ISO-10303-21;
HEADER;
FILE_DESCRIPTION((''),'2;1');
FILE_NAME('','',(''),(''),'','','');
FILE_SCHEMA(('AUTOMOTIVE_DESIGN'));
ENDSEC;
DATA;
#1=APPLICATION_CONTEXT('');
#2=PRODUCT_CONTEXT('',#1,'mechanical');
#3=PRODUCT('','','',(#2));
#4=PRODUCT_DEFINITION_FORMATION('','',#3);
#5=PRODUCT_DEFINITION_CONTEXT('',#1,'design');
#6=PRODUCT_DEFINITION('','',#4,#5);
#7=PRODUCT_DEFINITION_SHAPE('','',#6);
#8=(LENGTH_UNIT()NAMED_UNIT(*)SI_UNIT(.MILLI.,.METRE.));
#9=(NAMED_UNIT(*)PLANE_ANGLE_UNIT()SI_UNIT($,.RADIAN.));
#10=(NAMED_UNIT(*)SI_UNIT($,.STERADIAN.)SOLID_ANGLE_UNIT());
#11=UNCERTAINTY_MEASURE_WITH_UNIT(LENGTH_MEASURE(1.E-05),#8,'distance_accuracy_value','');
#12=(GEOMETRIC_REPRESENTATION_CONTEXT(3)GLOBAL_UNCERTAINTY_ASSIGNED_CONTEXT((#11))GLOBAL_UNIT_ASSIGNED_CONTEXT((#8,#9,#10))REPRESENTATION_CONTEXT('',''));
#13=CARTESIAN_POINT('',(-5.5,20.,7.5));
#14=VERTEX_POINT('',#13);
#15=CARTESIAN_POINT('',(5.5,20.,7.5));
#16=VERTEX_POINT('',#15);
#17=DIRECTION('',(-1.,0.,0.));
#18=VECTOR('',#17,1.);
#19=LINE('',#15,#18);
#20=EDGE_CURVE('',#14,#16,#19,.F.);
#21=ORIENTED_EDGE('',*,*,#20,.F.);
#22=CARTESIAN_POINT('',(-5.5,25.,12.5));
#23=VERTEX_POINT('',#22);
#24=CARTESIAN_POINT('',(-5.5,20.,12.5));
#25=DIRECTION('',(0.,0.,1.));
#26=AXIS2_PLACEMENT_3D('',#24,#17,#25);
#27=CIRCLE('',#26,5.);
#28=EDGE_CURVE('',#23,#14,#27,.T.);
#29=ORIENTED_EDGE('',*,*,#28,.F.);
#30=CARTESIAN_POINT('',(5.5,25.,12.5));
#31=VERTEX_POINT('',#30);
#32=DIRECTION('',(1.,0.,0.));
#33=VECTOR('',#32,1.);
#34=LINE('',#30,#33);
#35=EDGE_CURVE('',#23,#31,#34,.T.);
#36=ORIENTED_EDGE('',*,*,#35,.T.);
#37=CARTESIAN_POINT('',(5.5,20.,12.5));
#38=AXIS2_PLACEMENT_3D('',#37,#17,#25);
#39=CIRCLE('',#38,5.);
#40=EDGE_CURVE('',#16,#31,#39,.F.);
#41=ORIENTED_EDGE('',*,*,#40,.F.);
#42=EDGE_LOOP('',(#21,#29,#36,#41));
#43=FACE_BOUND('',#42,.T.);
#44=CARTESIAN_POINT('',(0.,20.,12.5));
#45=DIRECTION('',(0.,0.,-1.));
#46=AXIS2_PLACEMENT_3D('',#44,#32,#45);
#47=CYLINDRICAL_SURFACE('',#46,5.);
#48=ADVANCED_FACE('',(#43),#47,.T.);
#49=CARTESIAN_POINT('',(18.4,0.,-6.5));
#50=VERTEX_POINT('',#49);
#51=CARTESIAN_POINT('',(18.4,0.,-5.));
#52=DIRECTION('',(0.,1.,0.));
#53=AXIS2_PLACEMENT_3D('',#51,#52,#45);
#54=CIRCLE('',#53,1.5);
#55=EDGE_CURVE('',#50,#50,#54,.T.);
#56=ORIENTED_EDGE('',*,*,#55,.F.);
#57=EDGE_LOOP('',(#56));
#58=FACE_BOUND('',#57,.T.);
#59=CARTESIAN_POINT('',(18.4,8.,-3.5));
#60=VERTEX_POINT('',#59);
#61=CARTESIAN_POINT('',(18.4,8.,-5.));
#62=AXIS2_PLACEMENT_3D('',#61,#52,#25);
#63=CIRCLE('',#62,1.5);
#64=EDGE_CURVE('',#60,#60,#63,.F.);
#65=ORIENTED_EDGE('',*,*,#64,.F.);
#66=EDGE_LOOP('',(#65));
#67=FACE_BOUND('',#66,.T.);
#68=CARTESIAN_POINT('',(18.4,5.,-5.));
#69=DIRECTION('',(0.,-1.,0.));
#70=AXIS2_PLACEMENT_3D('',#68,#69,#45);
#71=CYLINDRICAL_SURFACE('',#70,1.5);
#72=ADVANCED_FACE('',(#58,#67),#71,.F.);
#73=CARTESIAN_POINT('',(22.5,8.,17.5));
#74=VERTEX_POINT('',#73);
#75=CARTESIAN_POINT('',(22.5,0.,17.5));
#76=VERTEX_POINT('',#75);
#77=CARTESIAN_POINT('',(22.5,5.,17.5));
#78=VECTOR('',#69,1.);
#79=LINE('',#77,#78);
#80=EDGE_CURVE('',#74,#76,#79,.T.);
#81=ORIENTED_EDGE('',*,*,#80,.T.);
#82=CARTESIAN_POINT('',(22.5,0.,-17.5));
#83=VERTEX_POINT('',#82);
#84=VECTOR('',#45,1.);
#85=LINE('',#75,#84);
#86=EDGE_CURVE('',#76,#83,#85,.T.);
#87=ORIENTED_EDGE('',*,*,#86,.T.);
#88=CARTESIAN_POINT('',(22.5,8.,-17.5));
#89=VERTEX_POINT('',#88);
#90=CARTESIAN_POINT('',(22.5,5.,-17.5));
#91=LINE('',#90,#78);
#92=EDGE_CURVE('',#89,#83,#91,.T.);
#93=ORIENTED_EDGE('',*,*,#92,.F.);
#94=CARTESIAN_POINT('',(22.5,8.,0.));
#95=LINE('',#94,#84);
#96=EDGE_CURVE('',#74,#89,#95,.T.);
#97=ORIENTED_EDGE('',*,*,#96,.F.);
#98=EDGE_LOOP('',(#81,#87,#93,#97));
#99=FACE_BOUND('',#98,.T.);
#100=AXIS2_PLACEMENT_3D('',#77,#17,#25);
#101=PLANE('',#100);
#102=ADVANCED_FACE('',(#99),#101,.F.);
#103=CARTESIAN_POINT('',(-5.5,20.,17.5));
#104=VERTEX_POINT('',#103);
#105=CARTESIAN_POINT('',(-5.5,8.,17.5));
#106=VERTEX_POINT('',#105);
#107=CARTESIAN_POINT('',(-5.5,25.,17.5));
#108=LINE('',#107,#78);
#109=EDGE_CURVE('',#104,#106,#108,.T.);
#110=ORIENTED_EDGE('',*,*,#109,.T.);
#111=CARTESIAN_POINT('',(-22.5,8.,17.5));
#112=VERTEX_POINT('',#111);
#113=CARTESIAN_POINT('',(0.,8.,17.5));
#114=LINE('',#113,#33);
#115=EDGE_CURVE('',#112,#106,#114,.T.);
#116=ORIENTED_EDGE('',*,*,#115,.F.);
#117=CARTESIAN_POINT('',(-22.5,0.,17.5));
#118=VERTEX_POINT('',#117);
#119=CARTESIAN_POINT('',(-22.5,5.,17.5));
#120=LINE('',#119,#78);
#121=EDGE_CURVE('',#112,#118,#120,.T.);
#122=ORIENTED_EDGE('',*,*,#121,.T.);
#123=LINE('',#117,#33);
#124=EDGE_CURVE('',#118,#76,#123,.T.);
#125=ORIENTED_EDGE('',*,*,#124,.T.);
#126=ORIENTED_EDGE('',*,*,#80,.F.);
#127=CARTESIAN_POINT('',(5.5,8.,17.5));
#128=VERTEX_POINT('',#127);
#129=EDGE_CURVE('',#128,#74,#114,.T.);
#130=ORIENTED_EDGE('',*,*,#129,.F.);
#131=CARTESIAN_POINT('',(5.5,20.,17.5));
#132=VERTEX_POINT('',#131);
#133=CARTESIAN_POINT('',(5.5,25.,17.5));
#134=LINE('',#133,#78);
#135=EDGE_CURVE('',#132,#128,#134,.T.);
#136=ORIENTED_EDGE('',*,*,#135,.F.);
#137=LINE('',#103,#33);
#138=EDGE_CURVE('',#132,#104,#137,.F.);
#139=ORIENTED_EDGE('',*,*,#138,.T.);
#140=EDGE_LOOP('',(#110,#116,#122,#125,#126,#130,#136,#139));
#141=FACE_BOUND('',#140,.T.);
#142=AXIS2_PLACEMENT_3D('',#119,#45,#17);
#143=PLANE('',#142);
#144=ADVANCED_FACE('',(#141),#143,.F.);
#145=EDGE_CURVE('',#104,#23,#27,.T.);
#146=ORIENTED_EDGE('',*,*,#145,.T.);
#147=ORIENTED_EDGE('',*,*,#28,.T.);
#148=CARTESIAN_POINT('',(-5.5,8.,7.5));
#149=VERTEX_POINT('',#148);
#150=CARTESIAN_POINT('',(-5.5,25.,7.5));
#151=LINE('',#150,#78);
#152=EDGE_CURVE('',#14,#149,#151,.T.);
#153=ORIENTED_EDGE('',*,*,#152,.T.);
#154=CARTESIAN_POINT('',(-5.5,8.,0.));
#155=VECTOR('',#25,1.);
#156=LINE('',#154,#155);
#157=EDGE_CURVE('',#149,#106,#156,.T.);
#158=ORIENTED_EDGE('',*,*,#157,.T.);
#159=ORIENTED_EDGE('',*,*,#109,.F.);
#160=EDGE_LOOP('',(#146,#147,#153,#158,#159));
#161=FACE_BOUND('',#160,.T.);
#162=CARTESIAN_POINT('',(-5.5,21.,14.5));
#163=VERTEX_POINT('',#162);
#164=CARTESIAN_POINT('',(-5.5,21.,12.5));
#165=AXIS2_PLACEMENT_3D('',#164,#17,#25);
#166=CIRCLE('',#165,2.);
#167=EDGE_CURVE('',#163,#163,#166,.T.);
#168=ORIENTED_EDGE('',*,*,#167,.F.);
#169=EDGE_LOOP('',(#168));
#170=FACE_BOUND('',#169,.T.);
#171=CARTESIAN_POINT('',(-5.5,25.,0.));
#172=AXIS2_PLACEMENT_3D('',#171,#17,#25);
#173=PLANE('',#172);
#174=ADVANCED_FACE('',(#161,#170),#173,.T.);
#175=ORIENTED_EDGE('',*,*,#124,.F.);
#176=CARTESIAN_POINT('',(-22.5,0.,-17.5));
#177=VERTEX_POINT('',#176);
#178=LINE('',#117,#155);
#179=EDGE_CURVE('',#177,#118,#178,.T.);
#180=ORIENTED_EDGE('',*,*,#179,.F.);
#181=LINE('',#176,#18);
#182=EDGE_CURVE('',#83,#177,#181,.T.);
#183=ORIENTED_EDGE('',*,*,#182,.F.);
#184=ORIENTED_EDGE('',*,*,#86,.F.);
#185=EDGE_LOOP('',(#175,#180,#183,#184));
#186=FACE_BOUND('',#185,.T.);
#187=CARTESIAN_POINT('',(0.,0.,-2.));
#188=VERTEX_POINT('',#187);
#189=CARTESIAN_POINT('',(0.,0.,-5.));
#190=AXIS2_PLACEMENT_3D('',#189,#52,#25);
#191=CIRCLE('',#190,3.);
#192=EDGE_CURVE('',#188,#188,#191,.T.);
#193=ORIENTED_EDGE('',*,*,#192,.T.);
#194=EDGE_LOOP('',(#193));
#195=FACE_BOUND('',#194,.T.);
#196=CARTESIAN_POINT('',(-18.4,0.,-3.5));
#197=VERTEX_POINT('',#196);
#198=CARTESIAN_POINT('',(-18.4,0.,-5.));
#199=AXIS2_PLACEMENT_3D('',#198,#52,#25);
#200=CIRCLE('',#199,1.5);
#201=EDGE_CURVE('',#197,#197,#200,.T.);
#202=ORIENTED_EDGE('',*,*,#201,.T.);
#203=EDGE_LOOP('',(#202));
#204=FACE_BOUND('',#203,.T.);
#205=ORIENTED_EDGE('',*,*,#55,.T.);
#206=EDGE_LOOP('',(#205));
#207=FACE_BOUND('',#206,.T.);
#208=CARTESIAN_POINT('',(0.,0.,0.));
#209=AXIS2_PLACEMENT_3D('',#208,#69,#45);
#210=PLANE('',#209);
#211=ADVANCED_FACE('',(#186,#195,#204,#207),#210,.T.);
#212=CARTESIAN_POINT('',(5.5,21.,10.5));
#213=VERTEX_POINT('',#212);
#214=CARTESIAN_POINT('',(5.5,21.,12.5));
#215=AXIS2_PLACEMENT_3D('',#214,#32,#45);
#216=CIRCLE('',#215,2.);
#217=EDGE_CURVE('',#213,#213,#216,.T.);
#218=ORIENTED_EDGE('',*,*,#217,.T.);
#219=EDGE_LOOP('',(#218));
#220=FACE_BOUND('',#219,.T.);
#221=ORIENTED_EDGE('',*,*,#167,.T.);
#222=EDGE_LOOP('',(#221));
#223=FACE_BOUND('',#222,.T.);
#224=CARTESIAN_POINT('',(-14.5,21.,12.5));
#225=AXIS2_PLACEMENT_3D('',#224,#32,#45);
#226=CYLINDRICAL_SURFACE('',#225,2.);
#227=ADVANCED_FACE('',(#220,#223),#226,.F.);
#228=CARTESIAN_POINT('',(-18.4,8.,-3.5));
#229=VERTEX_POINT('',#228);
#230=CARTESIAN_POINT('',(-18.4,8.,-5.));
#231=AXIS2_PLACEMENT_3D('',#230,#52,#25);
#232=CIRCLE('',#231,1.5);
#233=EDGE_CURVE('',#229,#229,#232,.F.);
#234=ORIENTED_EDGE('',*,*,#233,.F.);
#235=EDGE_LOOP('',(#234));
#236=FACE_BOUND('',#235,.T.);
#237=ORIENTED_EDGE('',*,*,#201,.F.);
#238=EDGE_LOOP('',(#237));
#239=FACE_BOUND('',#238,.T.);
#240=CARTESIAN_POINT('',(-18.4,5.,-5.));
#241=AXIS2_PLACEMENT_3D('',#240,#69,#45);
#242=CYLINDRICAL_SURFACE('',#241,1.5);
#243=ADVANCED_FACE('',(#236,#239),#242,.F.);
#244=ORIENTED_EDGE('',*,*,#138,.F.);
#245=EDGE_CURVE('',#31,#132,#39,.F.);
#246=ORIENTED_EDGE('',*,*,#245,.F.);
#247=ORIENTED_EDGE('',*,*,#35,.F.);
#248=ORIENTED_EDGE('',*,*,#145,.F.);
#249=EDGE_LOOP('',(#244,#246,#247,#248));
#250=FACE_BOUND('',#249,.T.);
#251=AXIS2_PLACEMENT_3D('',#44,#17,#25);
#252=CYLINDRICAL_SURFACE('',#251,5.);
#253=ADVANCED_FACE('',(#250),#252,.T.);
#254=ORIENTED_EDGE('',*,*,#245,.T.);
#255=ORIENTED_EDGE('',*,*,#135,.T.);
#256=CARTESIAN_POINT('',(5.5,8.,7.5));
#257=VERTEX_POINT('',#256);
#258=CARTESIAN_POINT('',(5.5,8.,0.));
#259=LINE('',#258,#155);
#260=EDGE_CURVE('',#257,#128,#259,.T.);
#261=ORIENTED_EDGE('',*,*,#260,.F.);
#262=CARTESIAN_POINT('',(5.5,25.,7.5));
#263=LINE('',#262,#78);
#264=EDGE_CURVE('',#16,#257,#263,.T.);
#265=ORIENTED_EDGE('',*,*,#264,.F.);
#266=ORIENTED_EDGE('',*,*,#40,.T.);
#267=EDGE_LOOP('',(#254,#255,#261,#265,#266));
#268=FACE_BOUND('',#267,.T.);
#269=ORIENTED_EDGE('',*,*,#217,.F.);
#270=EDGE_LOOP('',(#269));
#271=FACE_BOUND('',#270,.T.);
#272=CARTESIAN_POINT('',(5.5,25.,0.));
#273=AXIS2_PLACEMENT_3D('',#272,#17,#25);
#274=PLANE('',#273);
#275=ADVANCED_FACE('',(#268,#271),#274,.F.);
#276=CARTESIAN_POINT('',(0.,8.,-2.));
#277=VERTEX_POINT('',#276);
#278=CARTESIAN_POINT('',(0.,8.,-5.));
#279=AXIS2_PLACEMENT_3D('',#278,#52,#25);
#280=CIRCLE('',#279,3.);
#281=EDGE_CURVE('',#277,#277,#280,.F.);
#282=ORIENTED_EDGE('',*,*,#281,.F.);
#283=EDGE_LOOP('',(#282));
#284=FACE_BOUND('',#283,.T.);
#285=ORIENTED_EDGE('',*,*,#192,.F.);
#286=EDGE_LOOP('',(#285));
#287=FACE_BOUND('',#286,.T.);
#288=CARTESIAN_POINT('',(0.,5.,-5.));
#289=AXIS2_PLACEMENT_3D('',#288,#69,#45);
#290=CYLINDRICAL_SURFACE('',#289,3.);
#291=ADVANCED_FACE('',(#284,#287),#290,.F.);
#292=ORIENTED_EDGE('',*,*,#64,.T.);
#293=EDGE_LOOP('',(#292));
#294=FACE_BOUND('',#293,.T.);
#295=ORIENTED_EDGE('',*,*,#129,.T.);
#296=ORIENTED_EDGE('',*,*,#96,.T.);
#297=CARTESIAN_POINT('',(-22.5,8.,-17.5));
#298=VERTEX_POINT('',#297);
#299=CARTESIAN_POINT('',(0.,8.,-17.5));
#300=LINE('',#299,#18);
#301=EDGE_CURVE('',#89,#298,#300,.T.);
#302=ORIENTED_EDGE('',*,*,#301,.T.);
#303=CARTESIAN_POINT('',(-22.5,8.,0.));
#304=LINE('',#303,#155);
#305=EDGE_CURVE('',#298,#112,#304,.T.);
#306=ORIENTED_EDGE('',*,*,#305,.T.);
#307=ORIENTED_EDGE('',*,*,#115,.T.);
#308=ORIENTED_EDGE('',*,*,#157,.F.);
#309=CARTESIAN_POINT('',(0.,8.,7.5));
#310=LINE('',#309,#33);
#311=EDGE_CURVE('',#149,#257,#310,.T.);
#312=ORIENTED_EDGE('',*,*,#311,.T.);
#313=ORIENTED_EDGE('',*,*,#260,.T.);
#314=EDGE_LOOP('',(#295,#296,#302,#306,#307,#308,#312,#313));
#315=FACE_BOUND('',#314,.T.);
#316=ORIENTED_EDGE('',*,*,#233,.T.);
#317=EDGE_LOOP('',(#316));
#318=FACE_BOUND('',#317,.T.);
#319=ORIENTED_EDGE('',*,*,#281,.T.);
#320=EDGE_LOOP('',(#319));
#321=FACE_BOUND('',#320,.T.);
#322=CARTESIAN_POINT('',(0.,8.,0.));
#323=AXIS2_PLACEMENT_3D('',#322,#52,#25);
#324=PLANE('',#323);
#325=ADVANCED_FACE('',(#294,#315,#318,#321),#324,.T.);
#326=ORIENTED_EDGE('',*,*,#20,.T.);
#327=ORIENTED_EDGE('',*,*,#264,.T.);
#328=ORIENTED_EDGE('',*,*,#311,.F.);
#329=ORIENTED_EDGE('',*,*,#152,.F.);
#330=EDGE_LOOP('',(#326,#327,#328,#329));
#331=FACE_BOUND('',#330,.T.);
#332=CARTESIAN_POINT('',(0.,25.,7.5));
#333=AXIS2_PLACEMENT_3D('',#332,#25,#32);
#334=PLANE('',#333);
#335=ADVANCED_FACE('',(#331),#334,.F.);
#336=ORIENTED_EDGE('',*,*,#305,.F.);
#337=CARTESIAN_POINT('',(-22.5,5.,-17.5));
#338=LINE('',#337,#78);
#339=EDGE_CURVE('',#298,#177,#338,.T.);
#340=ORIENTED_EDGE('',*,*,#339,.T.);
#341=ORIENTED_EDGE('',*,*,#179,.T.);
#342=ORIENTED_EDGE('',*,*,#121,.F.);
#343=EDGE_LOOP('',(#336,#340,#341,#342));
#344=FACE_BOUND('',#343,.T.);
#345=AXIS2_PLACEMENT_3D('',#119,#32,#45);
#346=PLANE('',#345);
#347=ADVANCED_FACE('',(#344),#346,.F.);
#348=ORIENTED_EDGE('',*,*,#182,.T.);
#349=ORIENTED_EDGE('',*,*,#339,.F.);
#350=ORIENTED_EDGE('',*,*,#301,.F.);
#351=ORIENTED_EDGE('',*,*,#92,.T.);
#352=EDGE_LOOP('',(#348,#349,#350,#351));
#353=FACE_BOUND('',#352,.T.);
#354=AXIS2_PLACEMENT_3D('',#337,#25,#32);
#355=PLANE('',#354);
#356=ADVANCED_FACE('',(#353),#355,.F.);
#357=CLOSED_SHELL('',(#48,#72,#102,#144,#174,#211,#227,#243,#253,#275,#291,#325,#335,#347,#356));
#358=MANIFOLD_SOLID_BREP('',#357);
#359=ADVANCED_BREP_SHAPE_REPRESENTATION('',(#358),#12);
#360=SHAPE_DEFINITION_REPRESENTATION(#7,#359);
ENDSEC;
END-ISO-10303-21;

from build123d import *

# Parameters (mm, degrees)
SKETCH2_W           = 45
SKETCH2_H           = 35
SKETCH2_R           = 3
SKETCH2_R_2         = 1.5
BOSS_EXTRUDE1_DEPTH = 5
SKETCH4_R           = 1.5
SKETCH4_R_2         = 3
SKETCH4_W           = 11
SKETCH4_H           = 10
BOSS_EXTRUDE2_DEPTH = 3
SKETCH4_3_W         = 11
SKETCH4_3_H         = 10
BOSS_EXTRUDE3_DEPTH = 20
SKETCH5_R           = 2
CUT_EXTRUDE1_DEPTH  = 20
FILLET1_R           = 5


with BuildPart() as part:
    # Sketch2 → Boss-Extrude1 (new body)
    with BuildSketch(Plane(origin=(0, 0, 0), x_dir=(1, 0, 0), z_dir=(0, 1, 0))):
        Rectangle(SKETCH2_W, SKETCH2_H)
        with Locations(Location((0, 5, 0), (0, 0, 270))):
            Circle(SKETCH2_R, mode=Mode.SUBTRACT)
        with Locations(Location((-18.4, 5, 0), (0, 0, 270))):
            Circle(SKETCH2_R_2, mode=Mode.SUBTRACT)
        with Locations(Location((18.4, 5, 0), (0, 0, 90))):
            Circle(SKETCH2_R_2, mode=Mode.SUBTRACT)
    extrude(amount=BOSS_EXTRUDE1_DEPTH)

    # Sketch4 → Boss-Extrude2 (add)
    # profile 1 of 3: a face of its own
    with BuildSketch(Plane(origin=(0, 5, 0), x_dir=(1, 0, 0), z_dir=(0, 1, 0))):
        Polygon((5.5, -17.5), (15, -17.5), (22.5, -17.5), (22.5, 17.5), (-22.5, 17.5), (-22.5, -17.5), (-15, -17.5), (-5.5, -17.5), (-5.5, -7.5), (5.5, -7.5), align=None)
        with Locations(Location((-18.4, 5, 0), (0, 0, 270))):
            Circle(SKETCH4_R, mode=Mode.SUBTRACT)
        with Locations(Location((0, 5, 0), (0, 0, 270))):
            Circle(SKETCH4_R_2, mode=Mode.SUBTRACT)
        with Locations(Location((18.4, 5, 0), (0, 0, 90))):
            Circle(SKETCH4_R, mode=Mode.SUBTRACT)
    # profile 2 of 3: a face of its own
    with BuildSketch(Plane(origin=(0, 5, 0), x_dir=(1, 0, 0), z_dir=(0, 1, 0))):
        Polygon((5.5, -17.5), (15, -17.5), (22.5, -17.5), (22.5, 17.5), (-22.5, 17.5), (-22.5, -17.5), (-15, -17.5), (-5.5, -17.5), (-5.5, -7.5), (5.5, -7.5), align=None)
        with Locations(Location((-18.4, 5, 0), (0, 0, 270))):
            Circle(SKETCH4_R, mode=Mode.SUBTRACT)
        with Locations(Location((0, 5, 0), (0, 0, 270))):
            Circle(SKETCH4_R_2, mode=Mode.SUBTRACT)
        with Locations(Location((18.4, 5, 0), (0, 0, 90))):
            Circle(SKETCH4_R, mode=Mode.SUBTRACT)
    # profile 3 of 3: a face of its own
    with BuildSketch(Plane(origin=(0, 5, 0), x_dir=(1, 0, 0), z_dir=(0, 1, 0))):
        with Locations((0, -12.5)):
            Rectangle(SKETCH4_W, SKETCH4_H)
    extrude(amount=BOSS_EXTRUDE2_DEPTH)

    # Sketch4<3> → Boss-Extrude3 (add)
    with BuildSketch(Plane(origin=(0, 5, 0), x_dir=(1, 0, 0), z_dir=(0, 1, 0))):
        with Locations((0, -12.5)):
            Rectangle(SKETCH4_3_W, SKETCH4_3_H)
    extrude(amount=BOSS_EXTRUDE3_DEPTH)

    # Sketch5 → Cut-Extrude1 (cut)
    with BuildSketch(Plane(origin=(5.5, 0, 0), x_dir=(0, 0, -1), z_dir=(1, 0, 0))):
        with Locations((-12.5, 21)):
            Circle(SKETCH5_R)
    extrude(amount=-CUT_EXTRUDE1_DEPTH, mode=Mode.SUBTRACT)

    # Fillet1
    fillet1_edges = [part.edges().sort_by_distance(p)[0] for p in [
        (0, 25, 7.5),
        (0, 25, 17.5),
    ]]
    fillet(fillet1_edges, radius=FILLET1_R - 0.0001)  # a hair under: the kernel refuses the full size


solid = part.part
